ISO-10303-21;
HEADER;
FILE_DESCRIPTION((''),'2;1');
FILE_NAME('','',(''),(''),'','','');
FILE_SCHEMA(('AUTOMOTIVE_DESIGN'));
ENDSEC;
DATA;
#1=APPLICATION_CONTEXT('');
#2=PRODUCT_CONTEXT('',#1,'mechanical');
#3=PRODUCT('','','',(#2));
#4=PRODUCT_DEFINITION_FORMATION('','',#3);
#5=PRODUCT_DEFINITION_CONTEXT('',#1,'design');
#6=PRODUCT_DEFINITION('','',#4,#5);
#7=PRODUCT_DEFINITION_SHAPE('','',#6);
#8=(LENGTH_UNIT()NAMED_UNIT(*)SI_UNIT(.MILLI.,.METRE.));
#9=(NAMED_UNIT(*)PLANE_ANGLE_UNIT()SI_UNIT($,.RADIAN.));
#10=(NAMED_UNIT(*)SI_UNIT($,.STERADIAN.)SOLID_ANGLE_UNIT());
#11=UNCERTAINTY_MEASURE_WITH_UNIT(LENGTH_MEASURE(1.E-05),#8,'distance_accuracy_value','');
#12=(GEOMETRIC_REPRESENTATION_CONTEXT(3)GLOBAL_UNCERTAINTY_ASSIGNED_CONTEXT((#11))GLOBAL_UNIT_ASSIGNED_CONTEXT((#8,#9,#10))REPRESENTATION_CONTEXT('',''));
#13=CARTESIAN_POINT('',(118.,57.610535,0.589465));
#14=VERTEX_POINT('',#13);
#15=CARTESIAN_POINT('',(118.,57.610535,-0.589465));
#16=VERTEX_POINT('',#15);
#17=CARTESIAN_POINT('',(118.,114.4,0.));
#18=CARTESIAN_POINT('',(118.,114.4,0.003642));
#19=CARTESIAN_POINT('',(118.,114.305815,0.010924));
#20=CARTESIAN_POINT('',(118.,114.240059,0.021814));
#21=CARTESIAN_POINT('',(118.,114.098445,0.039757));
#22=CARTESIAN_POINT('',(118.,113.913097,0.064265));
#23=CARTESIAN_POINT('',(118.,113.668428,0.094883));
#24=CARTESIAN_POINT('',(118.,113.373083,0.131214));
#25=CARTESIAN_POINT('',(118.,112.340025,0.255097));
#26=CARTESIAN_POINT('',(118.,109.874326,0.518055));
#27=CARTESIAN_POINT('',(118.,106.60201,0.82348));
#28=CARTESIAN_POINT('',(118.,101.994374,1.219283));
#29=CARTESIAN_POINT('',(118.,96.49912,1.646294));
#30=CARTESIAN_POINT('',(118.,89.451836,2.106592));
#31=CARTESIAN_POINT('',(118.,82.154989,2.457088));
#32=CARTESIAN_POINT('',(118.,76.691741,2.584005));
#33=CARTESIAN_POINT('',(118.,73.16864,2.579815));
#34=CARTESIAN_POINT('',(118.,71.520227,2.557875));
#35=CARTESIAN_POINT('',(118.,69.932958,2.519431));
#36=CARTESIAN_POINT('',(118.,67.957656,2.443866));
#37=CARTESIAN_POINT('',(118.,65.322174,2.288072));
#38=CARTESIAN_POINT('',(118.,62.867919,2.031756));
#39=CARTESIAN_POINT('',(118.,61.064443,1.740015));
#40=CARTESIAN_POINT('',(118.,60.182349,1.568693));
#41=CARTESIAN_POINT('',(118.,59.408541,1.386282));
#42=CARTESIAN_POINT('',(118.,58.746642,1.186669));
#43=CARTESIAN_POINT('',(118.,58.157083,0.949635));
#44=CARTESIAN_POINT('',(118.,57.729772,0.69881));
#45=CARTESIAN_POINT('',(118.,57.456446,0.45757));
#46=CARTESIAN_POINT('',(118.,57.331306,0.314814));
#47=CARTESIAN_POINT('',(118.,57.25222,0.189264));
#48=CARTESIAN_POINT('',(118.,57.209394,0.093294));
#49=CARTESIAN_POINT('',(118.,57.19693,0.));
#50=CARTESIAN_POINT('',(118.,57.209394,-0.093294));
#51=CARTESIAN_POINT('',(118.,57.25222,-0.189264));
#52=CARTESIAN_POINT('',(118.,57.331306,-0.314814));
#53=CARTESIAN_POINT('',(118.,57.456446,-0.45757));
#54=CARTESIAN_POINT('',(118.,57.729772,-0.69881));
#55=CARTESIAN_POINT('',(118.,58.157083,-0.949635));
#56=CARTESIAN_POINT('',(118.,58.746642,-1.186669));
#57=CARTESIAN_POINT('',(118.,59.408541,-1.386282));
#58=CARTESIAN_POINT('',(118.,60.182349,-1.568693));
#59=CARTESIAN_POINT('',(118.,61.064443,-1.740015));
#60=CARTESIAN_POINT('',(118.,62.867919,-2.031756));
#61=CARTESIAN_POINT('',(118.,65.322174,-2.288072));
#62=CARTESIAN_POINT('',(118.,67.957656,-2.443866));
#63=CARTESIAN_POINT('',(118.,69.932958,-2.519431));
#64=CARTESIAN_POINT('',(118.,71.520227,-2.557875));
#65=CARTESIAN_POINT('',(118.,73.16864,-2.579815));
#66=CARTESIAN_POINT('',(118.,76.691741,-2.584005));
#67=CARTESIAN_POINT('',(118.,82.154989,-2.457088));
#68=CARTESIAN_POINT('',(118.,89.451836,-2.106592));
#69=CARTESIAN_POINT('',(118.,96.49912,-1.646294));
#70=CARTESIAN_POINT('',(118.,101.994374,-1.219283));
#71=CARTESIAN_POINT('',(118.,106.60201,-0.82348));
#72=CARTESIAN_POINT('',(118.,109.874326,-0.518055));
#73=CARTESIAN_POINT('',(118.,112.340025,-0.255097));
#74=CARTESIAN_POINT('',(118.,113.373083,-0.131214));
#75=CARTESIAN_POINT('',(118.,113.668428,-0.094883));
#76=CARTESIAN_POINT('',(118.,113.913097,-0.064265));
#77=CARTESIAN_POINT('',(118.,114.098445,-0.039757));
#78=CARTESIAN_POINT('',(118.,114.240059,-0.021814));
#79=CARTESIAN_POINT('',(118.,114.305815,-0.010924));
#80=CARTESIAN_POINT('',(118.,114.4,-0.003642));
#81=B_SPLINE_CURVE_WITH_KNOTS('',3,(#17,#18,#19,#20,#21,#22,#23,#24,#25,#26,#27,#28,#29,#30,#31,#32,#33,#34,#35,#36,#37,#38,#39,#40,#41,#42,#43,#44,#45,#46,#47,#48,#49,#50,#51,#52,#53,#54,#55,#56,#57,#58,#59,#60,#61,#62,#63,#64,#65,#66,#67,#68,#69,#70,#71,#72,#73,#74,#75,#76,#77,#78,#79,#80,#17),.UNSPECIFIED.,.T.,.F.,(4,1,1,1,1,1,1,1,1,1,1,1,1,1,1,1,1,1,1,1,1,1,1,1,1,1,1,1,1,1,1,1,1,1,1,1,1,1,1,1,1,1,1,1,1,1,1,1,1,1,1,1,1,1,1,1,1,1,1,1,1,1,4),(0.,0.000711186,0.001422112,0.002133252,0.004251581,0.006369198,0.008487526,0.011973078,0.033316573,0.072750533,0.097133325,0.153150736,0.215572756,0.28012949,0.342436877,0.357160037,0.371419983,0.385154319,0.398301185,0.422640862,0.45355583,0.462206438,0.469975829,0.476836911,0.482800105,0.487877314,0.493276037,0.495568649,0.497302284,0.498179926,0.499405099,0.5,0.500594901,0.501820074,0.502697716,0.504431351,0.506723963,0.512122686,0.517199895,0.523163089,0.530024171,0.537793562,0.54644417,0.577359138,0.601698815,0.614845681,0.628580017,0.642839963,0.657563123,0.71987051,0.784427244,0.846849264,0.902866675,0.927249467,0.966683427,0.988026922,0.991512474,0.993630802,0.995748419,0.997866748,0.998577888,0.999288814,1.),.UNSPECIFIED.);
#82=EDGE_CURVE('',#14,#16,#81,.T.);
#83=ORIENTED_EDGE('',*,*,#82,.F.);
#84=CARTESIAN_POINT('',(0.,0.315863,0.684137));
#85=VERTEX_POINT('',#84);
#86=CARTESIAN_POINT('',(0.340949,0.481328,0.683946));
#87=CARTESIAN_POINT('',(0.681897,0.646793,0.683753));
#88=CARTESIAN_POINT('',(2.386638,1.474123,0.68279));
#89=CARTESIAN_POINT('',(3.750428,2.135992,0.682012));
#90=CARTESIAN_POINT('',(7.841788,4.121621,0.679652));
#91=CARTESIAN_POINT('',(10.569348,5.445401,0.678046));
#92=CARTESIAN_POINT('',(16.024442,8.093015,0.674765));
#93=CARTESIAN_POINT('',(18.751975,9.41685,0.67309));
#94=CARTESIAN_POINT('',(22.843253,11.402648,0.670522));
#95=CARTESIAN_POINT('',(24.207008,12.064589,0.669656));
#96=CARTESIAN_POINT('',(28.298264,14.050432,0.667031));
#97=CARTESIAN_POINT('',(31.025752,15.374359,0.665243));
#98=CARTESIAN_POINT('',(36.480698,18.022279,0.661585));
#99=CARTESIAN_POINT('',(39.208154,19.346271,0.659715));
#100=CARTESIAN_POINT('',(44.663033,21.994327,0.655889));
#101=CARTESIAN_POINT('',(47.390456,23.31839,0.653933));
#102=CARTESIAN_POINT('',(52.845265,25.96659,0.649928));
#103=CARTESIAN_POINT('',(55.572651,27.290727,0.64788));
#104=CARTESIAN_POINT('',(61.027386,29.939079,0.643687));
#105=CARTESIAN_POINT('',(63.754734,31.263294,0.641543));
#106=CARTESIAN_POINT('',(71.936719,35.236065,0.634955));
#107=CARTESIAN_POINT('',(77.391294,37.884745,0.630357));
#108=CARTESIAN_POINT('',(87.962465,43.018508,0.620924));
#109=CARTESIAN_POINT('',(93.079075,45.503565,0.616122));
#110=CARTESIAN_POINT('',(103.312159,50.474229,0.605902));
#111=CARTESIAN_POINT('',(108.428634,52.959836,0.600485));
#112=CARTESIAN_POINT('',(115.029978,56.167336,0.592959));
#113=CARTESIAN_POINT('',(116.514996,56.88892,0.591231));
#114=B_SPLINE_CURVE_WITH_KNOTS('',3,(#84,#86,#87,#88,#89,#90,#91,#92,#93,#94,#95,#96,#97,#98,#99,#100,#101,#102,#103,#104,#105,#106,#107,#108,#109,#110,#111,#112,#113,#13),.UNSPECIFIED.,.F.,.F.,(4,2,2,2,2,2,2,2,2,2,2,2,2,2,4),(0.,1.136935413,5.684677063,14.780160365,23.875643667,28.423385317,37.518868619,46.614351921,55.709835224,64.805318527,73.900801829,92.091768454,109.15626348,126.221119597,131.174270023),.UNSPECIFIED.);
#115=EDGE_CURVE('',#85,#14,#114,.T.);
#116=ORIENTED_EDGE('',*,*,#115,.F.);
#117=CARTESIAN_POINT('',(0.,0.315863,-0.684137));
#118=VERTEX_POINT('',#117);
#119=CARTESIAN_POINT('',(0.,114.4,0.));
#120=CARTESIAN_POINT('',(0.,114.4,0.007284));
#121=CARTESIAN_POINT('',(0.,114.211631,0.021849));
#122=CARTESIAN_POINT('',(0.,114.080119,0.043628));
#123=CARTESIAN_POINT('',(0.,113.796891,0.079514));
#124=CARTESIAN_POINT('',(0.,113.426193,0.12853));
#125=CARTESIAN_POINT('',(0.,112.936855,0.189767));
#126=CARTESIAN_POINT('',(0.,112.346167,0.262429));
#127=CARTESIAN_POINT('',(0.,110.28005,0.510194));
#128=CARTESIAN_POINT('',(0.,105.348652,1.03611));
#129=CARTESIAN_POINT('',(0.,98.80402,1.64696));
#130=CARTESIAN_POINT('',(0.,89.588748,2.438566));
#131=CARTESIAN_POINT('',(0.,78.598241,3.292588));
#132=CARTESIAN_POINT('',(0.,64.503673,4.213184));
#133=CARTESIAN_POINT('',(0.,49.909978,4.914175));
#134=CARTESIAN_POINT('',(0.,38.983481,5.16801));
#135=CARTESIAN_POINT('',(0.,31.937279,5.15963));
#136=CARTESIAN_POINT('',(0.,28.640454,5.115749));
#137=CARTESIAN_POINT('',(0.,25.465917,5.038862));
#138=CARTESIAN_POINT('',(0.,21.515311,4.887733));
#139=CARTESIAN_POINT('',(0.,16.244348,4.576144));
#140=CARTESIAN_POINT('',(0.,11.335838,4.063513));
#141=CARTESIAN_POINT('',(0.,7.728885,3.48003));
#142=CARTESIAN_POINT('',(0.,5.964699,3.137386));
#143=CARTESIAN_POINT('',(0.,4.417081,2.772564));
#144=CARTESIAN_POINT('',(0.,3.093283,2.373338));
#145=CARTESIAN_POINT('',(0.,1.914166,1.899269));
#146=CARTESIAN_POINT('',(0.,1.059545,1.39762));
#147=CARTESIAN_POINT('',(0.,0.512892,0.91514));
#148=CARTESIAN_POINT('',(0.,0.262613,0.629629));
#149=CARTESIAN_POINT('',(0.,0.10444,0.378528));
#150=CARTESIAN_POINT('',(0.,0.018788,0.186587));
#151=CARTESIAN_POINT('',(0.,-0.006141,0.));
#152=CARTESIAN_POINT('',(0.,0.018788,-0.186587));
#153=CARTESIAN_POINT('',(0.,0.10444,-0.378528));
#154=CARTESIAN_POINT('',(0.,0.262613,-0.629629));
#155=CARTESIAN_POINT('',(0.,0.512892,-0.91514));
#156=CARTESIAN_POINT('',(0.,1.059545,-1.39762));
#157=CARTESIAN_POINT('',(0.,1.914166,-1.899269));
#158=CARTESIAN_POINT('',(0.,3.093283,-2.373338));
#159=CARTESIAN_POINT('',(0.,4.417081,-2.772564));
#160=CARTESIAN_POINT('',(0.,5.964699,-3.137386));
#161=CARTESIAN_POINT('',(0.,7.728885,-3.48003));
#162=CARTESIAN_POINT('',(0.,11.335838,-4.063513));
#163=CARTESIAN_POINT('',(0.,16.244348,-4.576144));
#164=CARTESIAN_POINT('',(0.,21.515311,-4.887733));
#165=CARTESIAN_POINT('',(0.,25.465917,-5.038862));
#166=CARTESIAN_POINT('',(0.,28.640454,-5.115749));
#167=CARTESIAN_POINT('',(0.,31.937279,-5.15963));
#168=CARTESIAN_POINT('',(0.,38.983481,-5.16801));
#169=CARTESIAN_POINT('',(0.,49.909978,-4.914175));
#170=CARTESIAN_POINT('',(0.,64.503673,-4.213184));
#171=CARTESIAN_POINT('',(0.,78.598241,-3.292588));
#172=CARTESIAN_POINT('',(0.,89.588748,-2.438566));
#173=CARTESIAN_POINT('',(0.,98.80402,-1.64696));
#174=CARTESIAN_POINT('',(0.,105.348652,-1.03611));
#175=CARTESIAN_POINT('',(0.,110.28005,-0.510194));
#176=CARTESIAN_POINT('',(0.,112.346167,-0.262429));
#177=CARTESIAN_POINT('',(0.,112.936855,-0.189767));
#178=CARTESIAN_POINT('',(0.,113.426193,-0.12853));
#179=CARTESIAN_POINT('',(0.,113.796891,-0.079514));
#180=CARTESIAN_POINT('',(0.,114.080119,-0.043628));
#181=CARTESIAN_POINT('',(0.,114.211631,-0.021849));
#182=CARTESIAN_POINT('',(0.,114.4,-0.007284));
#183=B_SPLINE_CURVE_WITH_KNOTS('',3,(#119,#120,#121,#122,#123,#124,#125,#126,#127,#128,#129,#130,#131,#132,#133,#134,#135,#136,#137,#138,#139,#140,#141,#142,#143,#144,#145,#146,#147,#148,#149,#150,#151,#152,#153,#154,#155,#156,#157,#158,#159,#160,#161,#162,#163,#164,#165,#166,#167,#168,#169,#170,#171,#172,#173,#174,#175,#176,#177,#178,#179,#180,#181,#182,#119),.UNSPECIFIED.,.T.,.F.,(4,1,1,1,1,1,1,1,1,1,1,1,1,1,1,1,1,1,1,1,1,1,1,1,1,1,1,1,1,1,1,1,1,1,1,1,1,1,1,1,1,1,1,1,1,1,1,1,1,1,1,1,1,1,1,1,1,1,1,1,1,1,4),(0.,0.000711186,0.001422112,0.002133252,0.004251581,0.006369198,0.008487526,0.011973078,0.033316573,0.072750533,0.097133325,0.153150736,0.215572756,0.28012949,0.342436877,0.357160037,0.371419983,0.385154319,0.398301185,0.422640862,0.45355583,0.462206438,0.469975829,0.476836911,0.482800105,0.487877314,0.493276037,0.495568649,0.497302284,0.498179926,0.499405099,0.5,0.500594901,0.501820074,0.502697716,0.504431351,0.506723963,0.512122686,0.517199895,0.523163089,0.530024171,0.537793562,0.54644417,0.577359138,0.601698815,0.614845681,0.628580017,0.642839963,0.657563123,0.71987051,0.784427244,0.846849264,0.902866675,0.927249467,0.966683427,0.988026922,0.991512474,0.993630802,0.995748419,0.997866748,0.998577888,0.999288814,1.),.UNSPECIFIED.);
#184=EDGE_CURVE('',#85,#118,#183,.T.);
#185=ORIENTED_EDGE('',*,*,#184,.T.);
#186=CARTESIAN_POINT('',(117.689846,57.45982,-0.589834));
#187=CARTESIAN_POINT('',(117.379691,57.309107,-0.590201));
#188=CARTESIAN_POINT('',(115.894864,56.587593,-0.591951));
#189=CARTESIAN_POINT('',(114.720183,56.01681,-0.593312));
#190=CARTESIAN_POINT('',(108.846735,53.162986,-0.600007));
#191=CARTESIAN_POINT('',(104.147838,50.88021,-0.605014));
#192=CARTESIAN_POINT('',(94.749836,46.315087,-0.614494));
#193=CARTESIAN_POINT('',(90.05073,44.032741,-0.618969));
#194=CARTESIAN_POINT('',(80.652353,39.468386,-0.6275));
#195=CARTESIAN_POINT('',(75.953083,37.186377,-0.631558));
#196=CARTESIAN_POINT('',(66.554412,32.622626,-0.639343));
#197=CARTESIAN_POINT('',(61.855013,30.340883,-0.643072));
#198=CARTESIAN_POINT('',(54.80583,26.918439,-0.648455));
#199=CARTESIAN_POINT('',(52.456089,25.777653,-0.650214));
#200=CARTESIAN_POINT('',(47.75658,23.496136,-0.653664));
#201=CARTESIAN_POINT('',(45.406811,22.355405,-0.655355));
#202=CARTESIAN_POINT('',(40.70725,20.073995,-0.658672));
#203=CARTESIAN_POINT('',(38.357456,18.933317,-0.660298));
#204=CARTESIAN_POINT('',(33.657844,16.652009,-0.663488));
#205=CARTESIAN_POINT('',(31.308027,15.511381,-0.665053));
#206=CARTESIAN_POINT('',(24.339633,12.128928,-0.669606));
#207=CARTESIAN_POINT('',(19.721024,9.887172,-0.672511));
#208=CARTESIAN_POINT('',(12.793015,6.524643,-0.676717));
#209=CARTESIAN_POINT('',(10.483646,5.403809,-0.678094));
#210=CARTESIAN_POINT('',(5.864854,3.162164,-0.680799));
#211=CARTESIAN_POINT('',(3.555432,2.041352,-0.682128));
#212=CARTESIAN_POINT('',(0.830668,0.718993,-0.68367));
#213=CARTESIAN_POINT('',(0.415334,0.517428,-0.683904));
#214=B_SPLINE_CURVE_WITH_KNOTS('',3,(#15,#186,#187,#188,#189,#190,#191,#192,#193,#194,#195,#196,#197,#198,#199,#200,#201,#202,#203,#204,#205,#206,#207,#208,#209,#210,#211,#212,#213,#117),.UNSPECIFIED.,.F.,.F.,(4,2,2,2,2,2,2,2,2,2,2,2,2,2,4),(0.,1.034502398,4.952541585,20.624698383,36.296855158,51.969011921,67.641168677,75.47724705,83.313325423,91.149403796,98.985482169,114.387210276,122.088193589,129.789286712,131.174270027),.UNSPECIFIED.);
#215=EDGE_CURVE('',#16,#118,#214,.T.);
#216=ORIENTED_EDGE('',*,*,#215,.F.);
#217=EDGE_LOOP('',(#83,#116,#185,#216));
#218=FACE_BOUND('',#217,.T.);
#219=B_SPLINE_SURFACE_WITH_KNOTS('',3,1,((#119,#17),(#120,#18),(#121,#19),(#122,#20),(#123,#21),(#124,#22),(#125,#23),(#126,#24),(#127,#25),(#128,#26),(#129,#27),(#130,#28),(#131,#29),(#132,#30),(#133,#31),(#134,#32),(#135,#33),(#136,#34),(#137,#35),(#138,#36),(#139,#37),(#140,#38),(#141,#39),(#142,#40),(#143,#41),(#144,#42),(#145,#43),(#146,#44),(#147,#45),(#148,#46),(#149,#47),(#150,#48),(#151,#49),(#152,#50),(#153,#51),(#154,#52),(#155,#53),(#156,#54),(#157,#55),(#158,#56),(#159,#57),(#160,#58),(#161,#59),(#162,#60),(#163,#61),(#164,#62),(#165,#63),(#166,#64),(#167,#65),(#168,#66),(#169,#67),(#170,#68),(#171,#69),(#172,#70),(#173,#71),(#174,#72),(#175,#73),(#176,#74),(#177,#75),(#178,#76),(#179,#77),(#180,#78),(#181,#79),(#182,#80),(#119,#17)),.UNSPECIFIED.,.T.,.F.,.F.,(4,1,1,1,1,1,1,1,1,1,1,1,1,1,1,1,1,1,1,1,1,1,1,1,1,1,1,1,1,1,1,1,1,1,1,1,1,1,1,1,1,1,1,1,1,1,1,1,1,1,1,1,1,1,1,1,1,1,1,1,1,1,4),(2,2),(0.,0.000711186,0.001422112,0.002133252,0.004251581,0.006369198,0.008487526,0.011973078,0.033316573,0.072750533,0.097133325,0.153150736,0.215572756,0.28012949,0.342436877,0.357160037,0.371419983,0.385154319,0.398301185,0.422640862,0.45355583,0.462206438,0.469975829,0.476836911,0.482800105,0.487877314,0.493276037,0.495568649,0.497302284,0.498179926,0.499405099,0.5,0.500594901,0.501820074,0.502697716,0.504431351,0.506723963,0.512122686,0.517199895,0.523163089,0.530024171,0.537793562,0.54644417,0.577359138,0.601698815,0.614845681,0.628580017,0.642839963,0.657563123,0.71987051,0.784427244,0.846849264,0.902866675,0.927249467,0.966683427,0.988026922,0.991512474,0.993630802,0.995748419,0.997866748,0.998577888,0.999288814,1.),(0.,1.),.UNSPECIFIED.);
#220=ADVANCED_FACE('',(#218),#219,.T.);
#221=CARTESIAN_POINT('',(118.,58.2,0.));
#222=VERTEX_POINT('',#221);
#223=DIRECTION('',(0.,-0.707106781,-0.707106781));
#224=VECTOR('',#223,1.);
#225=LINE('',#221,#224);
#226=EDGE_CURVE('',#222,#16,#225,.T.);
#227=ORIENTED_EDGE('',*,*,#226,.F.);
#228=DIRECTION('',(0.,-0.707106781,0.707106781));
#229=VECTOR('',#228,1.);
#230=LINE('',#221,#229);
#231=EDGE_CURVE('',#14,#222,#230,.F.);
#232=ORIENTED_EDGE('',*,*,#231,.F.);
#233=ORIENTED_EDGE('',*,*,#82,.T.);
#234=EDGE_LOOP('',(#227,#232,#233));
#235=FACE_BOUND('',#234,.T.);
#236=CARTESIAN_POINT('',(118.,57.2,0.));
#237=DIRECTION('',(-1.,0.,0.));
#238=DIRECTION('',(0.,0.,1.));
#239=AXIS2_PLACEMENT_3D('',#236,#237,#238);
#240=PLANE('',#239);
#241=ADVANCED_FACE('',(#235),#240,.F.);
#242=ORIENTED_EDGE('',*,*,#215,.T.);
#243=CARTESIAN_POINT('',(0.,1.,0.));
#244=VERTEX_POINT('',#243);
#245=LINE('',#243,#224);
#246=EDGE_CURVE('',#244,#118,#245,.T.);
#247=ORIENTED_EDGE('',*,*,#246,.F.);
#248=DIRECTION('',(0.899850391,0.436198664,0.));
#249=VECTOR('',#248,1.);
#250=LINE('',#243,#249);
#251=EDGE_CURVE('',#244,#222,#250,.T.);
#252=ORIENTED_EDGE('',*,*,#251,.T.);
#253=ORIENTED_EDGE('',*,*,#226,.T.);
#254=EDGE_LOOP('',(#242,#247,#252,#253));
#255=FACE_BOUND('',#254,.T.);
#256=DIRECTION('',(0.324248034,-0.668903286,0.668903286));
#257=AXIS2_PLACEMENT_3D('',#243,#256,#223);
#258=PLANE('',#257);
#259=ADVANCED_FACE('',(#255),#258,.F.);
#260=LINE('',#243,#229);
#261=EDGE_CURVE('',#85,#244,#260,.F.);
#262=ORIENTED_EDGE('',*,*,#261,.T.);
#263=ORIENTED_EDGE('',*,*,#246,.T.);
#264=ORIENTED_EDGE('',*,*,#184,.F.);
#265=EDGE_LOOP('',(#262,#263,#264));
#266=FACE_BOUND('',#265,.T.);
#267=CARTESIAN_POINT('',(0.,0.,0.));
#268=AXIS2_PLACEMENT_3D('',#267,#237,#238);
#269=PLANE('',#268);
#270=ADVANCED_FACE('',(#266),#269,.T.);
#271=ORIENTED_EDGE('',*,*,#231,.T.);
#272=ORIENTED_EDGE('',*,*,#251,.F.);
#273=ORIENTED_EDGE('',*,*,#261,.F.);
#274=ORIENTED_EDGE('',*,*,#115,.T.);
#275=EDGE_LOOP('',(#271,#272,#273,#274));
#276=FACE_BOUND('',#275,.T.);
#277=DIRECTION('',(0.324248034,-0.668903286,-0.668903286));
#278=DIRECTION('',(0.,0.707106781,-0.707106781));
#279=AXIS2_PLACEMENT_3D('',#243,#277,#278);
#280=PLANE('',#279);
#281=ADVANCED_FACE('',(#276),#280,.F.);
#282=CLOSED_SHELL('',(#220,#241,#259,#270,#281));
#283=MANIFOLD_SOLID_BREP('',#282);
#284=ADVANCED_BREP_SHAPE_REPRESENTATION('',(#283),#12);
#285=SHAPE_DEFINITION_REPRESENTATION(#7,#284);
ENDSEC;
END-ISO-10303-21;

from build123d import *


with BuildPart() as part:
    # 边界1: read off the stored shape, not the designer's step
    # 边界1: loft between two sections, ruled curve by curve
    other_1_from = [
        Edge.make_bspline([(0, 114.4, 0), (0, 114.4, 0.007283832), (0, 114.21163069, 0.021848837), (0, 114.080118647, 0.043628247), (0, 113.796890955, 0.079514286), (0, 113.426193351, 0.128529824), (0, 112.936855294, 0.18976694), (0, 112.346167, 0.26242899), (0, 110.280049708, 0.51019447), (0, 105.348652112, 1.036109846), (0, 98.804019609, 1.646960293), (0, 89.588748002, 2.438566234), (0, 78.598240942, 3.29258827), (0, 64.503672569, 4.213184102), (0, 49.909977833, 4.914175355), (0, 38.983481039, 5.16800985), (0, 31.937279333, 5.159629577), (0, 28.640454039, 5.115749057), (0, 25.465916509, 5.038861572), (0, 21.515311132, 4.887732663), (0, 16.244348489, 4.576144308), (0, 11.335837752, 4.063512647), (0, 7.728885363, 3.480029887), (0, 5.964698517, 3.137385513), (0, 4.417081382, 2.772564157), (0, 3.093283382, 2.373338217), (0, 1.914166214, 1.899269319), (0, 1.059544765, 1.397620101), (0, 0.512892323, 0.915140017), (0, 0.262612741, 0.629628981), (0, 0.104439841, 0.378528288), (0, 0.018787658, 0.186587242), (0, -0.00614085, 0), (0, 0.018787658, -0.186587242), (0, 0.104439841, -0.378528288), (0, 0.262612741, -0.629628981), (0, 0.512892323, -0.915140017), (0, 1.059544765, -1.397620101), (0, 1.914166214, -1.899269319), (0, 3.093283382, -2.373338217), (0, 4.417081382, -2.772564157), (0, 5.964698517, -3.137385513), (0, 7.728885363, -3.480029887), (0, 11.335837752, -4.063512647), (0, 16.244348489, -4.576144308), (0, 21.515311132, -4.887732663), (0, 25.465916509, -5.038861572), (0, 28.640454039, -5.115749057), (0, 31.937279333, -5.159629577), (0, 38.983481039, -5.16800985), (0, 49.909977833, -4.914175355), (0, 64.503672569, -4.213184102), (0, 78.598240942, -3.29258827), (0, 89.588748002, -2.438566234), (0, 98.804019609, -1.646960293), (0, 105.348652112, -1.036109846), (0, 110.280049708, -0.51019447), (0, 112.346167, -0.26242899), (0, 112.936855294, -0.18976694), (0, 113.426193351, -0.128529824), (0, 113.796890955, -0.079514286), (0, 114.080118647, -0.043628247), (0, 114.21163069, -0.021848837), (0, 114.4, -0.007283832), (0, 114.4, 0)], [0, 0, 0, 0, 0.000711186, 0.001422112, 0.002133252, 0.004251581, 0.006369198, 0.008487526, 0.011973078, 0.033316573, 0.072750533, 0.097133325, 0.153150736, 0.215572756, 0.28012949, 0.342436877, 0.357160037, 0.371419983, 0.385154319, 0.398301185, 0.422640862, 0.45355583, 0.462206438, 0.469975829, 0.476836911, 0.482800105, 0.487877314, 0.493276037, 0.495568649, 0.497302284, 0.498179926, 0.499405099, 0.5, 0.500594901, 0.501820074, 0.502697716, 0.504431351, 0.506723963, 0.512122686, 0.517199895, 0.523163089, 0.530024171, 0.537793562, 0.54644417, 0.577359138, 0.601698815, 0.614845681, 0.628580017, 0.642839963, 0.657563123, 0.71987051, 0.784427244, 0.846849264, 0.902866675, 0.927249467, 0.966683427, 0.988026922, 0.991512474, 0.993630802, 0.995748419, 0.997866748, 0.998577888, 0.999288814, 1, 1, 1, 1], 3),
    ]
    other_1_to = [
        Edge.make_bspline([(118, 114.4, 0), (118, 114.4, 0.003641916), (118, 114.305815345, 0.010924418), (118, 114.240059323, 0.021814123), (118, 114.098445477, 0.039757143), (118, 113.913096675, 0.064264912), (118, 113.668427647, 0.09488347), (118, 113.3730835, 0.131214495), (118, 112.340024854, 0.255097235), (118, 109.874326056, 0.518054923), (118, 106.602009805, 0.823480147), (118, 101.994374001, 1.219283117), (118, 96.499120471, 1.646294135), (118, 89.451836285, 2.106592051), (118, 82.154988917, 2.457087677), (118, 76.69174052, 2.584004925), (118, 73.168639667, 2.579814789), (118, 71.520227019, 2.557874528), (118, 69.932958254, 2.519430786), (118, 67.957655566, 2.443866331), (118, 65.322174244, 2.288072154), (118, 62.867918876, 2.031756324), (118, 61.064442682, 1.740014943), (118, 60.182349259, 1.568692756), (118, 59.408540691, 1.386282078), (118, 58.746641691, 1.186669108), (118, 58.157083107, 0.949634659), (118, 57.729772382, 0.698810051), (118, 57.456446161, 0.457570009), (118, 57.33130637, 0.314814491), (118, 57.252219921, 0.189264144), (118, 57.209393829, 0.093293621), (118, 57.196929575, 0), (118, 57.209393829, -0.093293621), (118, 57.252219921, -0.189264144), (118, 57.33130637, -0.314814491), (118, 57.456446161, -0.457570009), (118, 57.729772382, -0.698810051), (118, 58.157083107, -0.949634659), (118, 58.746641691, -1.186669108), (118, 59.408540691, -1.386282078), (118, 60.182349259, -1.568692756), (118, 61.064442682, -1.740014943), (118, 62.867918876, -2.031756324), (118, 65.322174244, -2.288072154), (118, 67.957655566, -2.443866331), (118, 69.932958254, -2.519430786), (118, 71.520227019, -2.557874528), (118, 73.168639667, -2.579814789), (118, 76.69174052, -2.584004925), (118, 82.154988917, -2.457087677), (118, 89.451836285, -2.106592051), (118, 96.499120471, -1.646294135), (118, 101.994374001, -1.219283117), (118, 106.602009805, -0.823480147), (118, 109.874326056, -0.518054923), (118, 112.340024854, -0.255097235), (118, 113.3730835, -0.131214495), (118, 113.668427647, -0.09488347), (118, 113.913096675, -0.064264912), (118, 114.098445477, -0.039757143), (118, 114.240059323, -0.021814123), (118, 114.305815345, -0.010924418), (118, 114.4, -0.003641916), (118, 114.4, 0)], [0, 0, 0, 0, 0.000711186, 0.001422112, 0.002133252, 0.004251581, 0.006369198, 0.008487526, 0.011973078, 0.033316573, 0.072750533, 0.097133325, 0.153150736, 0.215572756, 0.28012949, 0.342436877, 0.357160037, 0.371419983, 0.385154319, 0.398301185, 0.422640862, 0.45355583, 0.462206438, 0.469975829, 0.476836911, 0.482800105, 0.487877314, 0.493276037, 0.495568649, 0.497302284, 0.498179926, 0.499405099, 0.5, 0.500594901, 0.501820074, 0.502697716, 0.504431351, 0.506723963, 0.512122686, 0.517199895, 0.523163089, 0.530024171, 0.537793562, 0.54644417, 0.577359138, 0.601698815, 0.614845681, 0.628580017, 0.642839963, 0.657563123, 0.71987051, 0.784427244, 0.846849264, 0.902866675, 0.927249467, 0.966683427, 0.988026922, 0.991512474, 0.993630802, 0.995748419, 0.997866748, 0.998577888, 0.999288814, 1, 1, 1, 1], 3),
    ]
    other_1 = Solid(Shell([*[Face.make_surface_from_curves(other_1_from[k], other_1_to[k]) for k in range(1)], Face(Wire(other_1_from)), Face(Wire(other_1_to))]))
    add(other_1)

    # 切除-扫描1: sweep along a path in 草图6
    with BuildLine(Plane.XY) as sweep_1_path:
        Line((0, -20), (118, 37.2))
    # 草图7 → 切除-扫描1 (sweep, cut)
    with BuildSketch(Plane.ZY):
        Polygon((0, 1), (-6.102768749, -5.102768749), (-156.658167725, 128.563638696), (142.795041805, 131.589504307), (6.102768749, -5.102768749), align=None)
    sweep(path=sweep_1_path.line, mode=Mode.SUBTRACT)


solid = part.part
